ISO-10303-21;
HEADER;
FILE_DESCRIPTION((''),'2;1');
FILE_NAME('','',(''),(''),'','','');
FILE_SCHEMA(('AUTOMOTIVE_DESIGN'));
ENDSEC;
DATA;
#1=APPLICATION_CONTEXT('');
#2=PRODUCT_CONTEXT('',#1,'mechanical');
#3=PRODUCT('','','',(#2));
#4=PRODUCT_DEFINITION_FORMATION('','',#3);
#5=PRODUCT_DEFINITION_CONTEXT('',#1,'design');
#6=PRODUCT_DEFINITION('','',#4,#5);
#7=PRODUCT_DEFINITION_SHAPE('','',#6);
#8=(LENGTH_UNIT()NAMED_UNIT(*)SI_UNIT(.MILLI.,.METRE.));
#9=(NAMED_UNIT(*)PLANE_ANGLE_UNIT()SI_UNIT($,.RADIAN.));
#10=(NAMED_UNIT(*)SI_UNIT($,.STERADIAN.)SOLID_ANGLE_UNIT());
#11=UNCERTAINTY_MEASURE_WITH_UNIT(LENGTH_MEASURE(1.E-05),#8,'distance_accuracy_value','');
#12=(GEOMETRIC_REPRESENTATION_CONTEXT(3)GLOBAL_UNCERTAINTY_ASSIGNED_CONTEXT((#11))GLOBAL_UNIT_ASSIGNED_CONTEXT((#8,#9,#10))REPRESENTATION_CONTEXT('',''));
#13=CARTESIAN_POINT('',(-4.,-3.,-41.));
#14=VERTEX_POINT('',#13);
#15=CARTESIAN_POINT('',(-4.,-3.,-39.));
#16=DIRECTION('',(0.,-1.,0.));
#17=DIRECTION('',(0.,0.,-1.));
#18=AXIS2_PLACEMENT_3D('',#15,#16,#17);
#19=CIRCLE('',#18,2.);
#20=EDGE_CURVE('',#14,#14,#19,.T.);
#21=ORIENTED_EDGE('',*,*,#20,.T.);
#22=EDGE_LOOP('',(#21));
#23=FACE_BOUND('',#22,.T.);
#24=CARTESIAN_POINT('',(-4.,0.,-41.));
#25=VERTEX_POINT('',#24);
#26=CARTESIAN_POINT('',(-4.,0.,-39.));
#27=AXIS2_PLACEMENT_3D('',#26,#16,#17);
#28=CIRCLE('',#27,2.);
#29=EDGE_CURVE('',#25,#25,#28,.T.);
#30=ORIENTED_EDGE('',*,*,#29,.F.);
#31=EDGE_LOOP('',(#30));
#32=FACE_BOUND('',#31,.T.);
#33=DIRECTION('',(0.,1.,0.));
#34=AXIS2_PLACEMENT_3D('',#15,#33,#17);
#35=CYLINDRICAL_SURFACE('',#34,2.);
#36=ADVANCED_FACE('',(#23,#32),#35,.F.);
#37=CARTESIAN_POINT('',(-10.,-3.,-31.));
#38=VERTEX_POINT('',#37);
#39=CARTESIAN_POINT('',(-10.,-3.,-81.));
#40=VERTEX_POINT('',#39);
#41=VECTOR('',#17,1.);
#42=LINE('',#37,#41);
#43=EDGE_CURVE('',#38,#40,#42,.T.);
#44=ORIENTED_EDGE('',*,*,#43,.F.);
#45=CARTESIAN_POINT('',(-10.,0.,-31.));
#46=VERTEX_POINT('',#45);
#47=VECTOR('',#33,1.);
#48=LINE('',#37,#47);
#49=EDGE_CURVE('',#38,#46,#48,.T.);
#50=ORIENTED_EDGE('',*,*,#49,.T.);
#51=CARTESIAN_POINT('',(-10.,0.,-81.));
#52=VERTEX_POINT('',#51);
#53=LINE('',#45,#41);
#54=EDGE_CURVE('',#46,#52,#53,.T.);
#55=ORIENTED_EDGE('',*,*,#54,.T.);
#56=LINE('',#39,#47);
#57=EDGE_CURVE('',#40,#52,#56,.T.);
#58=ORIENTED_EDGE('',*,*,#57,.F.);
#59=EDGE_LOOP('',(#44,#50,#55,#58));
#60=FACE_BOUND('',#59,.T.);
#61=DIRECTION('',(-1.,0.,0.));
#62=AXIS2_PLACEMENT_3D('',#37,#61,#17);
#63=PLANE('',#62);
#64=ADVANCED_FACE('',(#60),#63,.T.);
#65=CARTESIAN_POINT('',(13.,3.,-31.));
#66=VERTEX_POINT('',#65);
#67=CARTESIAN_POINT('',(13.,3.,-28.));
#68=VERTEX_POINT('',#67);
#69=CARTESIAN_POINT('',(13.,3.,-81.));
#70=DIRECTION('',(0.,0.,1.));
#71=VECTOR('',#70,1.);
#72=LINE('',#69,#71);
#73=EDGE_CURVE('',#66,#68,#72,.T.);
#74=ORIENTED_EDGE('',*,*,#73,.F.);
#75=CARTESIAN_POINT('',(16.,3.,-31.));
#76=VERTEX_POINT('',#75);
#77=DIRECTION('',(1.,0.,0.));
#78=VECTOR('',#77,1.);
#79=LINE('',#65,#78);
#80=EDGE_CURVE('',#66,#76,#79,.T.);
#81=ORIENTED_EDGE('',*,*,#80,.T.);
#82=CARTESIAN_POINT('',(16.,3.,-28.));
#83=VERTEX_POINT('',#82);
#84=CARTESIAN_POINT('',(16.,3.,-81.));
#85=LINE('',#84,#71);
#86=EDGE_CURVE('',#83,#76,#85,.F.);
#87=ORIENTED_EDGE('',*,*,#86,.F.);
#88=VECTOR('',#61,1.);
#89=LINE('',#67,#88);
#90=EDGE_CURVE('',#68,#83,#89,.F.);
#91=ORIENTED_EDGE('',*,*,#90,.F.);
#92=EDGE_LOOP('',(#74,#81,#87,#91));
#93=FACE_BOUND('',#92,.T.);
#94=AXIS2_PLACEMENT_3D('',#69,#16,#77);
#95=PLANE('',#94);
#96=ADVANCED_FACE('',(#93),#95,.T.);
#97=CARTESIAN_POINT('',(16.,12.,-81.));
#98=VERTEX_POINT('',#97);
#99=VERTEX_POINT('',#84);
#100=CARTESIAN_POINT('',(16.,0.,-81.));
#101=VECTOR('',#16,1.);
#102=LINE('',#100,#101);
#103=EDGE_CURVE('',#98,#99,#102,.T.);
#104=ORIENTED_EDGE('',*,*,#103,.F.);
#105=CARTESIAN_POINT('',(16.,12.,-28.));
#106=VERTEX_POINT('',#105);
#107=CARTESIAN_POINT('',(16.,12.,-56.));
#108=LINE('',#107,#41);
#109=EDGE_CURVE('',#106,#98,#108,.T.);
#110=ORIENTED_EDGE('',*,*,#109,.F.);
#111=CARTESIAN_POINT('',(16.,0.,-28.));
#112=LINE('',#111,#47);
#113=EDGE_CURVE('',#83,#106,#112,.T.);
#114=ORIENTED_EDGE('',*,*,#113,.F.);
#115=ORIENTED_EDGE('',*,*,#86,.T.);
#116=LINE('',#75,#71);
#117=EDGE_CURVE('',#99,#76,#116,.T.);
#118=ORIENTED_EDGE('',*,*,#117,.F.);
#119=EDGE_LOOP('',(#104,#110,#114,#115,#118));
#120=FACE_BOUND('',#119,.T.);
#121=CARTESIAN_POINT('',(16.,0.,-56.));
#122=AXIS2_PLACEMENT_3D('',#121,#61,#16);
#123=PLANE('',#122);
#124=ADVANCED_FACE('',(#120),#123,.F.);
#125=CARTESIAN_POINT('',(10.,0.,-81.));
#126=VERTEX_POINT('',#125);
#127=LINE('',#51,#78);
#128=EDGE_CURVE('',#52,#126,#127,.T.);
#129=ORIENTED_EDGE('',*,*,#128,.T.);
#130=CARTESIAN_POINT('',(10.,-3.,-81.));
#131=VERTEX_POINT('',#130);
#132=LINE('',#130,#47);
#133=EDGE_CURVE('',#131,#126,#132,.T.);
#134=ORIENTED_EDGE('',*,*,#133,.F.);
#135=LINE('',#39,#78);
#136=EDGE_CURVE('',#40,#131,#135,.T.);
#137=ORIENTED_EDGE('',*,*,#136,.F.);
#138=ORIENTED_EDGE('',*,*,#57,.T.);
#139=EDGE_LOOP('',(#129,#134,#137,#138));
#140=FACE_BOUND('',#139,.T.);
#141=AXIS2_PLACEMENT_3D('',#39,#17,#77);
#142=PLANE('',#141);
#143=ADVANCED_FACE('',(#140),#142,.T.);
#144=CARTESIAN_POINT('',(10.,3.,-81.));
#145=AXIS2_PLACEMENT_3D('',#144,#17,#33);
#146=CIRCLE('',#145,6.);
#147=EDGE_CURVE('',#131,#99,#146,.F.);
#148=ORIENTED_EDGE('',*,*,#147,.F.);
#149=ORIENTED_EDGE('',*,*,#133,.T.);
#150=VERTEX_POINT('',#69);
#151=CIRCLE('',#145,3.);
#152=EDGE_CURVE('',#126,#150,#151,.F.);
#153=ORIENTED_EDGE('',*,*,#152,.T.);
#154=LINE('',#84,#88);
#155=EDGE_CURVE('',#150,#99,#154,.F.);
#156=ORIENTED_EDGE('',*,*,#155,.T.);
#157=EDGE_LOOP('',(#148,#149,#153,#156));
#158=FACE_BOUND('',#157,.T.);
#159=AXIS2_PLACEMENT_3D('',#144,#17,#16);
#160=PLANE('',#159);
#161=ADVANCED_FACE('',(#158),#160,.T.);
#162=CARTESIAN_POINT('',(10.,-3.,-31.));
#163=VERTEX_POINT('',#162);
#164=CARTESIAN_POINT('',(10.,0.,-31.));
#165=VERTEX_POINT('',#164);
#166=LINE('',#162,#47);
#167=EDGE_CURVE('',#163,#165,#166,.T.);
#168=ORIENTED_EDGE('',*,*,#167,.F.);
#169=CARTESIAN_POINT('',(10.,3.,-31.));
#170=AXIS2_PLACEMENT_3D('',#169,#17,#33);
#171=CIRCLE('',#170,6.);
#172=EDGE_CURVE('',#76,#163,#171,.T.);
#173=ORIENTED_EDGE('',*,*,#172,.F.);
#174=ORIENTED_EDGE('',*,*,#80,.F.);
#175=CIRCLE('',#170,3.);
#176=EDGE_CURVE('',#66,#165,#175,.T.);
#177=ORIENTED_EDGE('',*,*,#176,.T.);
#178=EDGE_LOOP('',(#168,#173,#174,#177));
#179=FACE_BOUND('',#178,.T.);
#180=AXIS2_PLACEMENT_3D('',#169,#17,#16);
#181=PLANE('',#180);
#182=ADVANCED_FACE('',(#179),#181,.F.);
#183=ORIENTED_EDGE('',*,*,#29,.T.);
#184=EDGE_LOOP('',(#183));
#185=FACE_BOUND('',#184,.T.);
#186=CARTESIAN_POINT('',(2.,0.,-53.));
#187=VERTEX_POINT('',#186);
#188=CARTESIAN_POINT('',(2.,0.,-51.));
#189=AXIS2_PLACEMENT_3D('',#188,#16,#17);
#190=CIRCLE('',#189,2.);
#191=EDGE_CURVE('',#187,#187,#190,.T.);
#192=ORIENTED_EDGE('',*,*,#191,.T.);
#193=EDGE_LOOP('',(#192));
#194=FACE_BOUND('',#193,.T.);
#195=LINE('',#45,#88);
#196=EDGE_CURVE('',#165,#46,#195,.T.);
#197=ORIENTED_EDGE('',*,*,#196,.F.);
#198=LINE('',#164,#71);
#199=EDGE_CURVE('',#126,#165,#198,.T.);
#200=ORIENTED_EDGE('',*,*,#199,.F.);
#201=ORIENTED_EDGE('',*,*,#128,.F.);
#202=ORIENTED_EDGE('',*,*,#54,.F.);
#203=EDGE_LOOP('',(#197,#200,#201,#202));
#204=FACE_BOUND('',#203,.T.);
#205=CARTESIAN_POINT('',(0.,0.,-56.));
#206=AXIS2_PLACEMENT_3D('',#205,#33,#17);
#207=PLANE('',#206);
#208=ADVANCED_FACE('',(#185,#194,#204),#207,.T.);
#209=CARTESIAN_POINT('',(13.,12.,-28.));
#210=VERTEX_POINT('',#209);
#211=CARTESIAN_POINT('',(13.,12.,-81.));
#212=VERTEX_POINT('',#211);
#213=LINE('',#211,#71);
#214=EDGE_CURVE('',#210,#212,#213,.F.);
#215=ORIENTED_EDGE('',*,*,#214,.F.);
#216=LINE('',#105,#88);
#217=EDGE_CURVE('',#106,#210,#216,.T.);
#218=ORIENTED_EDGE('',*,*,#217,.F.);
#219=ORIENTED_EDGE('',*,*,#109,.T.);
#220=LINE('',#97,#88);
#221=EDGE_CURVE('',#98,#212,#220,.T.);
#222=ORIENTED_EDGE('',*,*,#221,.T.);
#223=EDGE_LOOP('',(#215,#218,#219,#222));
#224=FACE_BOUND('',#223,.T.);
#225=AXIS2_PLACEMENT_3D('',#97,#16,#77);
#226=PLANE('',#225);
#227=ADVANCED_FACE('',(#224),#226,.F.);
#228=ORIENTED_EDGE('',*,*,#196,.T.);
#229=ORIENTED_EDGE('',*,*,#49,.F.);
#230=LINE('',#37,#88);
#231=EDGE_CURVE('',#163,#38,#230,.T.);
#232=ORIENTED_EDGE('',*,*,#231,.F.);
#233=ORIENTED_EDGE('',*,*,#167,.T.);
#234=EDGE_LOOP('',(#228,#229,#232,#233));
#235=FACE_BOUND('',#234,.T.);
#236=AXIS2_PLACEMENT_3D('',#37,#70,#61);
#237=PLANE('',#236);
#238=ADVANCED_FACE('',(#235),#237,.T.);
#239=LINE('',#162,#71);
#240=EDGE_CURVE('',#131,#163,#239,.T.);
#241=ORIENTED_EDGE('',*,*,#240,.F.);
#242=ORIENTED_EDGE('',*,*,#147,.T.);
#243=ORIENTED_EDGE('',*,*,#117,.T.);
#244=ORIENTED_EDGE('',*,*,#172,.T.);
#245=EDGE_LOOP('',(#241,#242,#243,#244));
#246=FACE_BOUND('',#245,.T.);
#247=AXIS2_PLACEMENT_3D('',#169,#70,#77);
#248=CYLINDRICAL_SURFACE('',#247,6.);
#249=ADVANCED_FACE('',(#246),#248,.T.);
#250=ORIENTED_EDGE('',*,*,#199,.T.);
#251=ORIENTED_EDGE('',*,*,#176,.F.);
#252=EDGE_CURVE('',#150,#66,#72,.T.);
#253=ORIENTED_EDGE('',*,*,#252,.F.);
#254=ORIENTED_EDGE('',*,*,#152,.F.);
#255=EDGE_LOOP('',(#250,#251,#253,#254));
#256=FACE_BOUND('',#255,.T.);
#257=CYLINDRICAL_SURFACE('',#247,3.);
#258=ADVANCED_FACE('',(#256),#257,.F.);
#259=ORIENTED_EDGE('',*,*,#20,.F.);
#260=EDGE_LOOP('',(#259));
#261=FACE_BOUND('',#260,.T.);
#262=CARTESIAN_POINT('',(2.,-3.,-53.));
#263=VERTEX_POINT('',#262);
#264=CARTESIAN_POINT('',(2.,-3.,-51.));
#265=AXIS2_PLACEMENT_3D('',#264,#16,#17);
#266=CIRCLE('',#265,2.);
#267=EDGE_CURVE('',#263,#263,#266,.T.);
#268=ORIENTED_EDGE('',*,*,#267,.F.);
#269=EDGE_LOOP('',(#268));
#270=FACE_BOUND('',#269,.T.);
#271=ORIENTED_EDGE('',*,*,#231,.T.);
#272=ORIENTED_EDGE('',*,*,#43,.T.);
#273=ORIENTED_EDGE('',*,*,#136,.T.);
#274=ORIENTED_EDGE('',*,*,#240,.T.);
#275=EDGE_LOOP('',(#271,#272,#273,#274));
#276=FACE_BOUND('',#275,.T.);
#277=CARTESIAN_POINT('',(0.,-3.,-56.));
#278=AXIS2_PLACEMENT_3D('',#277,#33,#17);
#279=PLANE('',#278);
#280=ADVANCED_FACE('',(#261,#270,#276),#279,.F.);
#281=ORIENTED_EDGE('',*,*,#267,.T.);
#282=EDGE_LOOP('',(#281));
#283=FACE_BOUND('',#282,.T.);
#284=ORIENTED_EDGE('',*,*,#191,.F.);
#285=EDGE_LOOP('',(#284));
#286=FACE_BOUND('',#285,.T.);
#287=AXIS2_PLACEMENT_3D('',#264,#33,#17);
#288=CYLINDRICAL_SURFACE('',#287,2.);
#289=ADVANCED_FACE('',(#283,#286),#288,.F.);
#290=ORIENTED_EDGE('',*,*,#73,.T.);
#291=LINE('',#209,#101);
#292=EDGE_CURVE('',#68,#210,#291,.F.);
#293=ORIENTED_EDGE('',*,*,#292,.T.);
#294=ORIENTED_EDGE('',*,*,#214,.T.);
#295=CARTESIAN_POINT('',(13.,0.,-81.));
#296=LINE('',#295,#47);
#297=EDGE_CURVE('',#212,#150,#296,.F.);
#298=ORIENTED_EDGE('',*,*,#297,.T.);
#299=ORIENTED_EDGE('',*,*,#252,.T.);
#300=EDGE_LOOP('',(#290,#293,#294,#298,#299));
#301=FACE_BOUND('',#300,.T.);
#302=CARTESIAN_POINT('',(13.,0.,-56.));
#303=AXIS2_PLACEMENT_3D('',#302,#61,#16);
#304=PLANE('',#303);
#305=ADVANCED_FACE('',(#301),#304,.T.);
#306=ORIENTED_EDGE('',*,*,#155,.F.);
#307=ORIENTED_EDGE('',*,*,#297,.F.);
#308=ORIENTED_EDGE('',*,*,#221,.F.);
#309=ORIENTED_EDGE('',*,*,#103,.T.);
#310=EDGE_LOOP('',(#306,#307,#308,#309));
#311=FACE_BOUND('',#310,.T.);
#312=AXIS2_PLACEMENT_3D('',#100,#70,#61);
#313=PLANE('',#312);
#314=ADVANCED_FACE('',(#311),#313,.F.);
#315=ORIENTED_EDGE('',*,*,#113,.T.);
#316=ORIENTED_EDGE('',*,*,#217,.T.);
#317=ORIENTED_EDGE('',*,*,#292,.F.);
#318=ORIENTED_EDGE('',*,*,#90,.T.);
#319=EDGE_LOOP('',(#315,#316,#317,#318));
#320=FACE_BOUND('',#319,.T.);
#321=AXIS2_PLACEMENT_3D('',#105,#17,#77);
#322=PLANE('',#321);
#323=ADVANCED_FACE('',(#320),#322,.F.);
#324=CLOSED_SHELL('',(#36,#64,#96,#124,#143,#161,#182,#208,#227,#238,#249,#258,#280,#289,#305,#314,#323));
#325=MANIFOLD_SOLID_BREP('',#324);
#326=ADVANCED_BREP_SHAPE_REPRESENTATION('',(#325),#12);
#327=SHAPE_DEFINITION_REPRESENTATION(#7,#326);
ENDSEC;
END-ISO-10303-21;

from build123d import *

# Parameters (mm, degrees)
SKETCH1_W               = 20
SKETCH1_H               = 50
SKETCH1_R               = 2
BASE_FLANGE1_DEPTH      = 3
EDGE_FLANGE1_DEPTH      = 50
EDGE_FLANGE1_START      = 3
EDGE_FLANGE1_PROFILE_W  = 53
EDGE_FLANGE1_PROFILE_H  = 9
EDGE_FLANGE1_FLAT_DEPTH = 3


# Sheet-metal steps are written as plain solids
with BuildPart() as part:
    # Sketch1 → Base-Flange1 (new body)
    with BuildSketch(Plane(origin=(0, 0, 0), x_dir=(1, 0, 0), z_dir=(0, 1, 0))):
        Rectangle(SKETCH1_W, SKETCH1_H)
        with Locations(Location((-4, 17, 0), (0, 0, 270))):
            Circle(SKETCH1_R, mode=Mode.SUBTRACT)
        with Locations(Location((2, 5, 0), (0, 0, 270))):
            Circle(SKETCH1_R, mode=Mode.SUBTRACT)
    extrude(amount=-BASE_FLANGE1_DEPTH)

    # Edge-Flange1 bend section (across the edge) → Edge-Flange1 (add)
    with BuildSketch(Plane(origin=(13, 0, 25), x_dir=(-1, 0, 0), z_dir=(0, 0, -1))):
        with BuildLine():
            Line((-3, 3), (0, 3))
            ThreePointArc((0, 3), (0.878679656, 0.878679656), (3, 0))
            Line((3, 0), (3, -3))
            ThreePointArc((3, -3), (-1.242640687, -1.242640687), (-3, 3))
        make_face()
    extrude(amount=EDGE_FLANGE1_DEPTH)

    # Edge-Flange1 profile (on flange) → Edge-Flange1 flat (add)
    with BuildSketch(Plane(origin=(13, 0, 0), x_dir=(0, 0, -1), z_dir=(1, 0, 0)).offset(EDGE_FLANGE1_START)):
        with Locations((1.5, 7.5)):
            Rectangle(EDGE_FLANGE1_PROFILE_W, EDGE_FLANGE1_PROFILE_H)
    extrude(amount=-EDGE_FLANGE1_FLAT_DEPTH)


with BuildPart() as body_2:
    # Mirror1: mirrored copy
    add(part.part.mirror(Plane(origin=(14.5, 7.5, -28), x_dir=(1, 0, 0), z_dir=(0, 0, -1))))


solid = body_2.part
